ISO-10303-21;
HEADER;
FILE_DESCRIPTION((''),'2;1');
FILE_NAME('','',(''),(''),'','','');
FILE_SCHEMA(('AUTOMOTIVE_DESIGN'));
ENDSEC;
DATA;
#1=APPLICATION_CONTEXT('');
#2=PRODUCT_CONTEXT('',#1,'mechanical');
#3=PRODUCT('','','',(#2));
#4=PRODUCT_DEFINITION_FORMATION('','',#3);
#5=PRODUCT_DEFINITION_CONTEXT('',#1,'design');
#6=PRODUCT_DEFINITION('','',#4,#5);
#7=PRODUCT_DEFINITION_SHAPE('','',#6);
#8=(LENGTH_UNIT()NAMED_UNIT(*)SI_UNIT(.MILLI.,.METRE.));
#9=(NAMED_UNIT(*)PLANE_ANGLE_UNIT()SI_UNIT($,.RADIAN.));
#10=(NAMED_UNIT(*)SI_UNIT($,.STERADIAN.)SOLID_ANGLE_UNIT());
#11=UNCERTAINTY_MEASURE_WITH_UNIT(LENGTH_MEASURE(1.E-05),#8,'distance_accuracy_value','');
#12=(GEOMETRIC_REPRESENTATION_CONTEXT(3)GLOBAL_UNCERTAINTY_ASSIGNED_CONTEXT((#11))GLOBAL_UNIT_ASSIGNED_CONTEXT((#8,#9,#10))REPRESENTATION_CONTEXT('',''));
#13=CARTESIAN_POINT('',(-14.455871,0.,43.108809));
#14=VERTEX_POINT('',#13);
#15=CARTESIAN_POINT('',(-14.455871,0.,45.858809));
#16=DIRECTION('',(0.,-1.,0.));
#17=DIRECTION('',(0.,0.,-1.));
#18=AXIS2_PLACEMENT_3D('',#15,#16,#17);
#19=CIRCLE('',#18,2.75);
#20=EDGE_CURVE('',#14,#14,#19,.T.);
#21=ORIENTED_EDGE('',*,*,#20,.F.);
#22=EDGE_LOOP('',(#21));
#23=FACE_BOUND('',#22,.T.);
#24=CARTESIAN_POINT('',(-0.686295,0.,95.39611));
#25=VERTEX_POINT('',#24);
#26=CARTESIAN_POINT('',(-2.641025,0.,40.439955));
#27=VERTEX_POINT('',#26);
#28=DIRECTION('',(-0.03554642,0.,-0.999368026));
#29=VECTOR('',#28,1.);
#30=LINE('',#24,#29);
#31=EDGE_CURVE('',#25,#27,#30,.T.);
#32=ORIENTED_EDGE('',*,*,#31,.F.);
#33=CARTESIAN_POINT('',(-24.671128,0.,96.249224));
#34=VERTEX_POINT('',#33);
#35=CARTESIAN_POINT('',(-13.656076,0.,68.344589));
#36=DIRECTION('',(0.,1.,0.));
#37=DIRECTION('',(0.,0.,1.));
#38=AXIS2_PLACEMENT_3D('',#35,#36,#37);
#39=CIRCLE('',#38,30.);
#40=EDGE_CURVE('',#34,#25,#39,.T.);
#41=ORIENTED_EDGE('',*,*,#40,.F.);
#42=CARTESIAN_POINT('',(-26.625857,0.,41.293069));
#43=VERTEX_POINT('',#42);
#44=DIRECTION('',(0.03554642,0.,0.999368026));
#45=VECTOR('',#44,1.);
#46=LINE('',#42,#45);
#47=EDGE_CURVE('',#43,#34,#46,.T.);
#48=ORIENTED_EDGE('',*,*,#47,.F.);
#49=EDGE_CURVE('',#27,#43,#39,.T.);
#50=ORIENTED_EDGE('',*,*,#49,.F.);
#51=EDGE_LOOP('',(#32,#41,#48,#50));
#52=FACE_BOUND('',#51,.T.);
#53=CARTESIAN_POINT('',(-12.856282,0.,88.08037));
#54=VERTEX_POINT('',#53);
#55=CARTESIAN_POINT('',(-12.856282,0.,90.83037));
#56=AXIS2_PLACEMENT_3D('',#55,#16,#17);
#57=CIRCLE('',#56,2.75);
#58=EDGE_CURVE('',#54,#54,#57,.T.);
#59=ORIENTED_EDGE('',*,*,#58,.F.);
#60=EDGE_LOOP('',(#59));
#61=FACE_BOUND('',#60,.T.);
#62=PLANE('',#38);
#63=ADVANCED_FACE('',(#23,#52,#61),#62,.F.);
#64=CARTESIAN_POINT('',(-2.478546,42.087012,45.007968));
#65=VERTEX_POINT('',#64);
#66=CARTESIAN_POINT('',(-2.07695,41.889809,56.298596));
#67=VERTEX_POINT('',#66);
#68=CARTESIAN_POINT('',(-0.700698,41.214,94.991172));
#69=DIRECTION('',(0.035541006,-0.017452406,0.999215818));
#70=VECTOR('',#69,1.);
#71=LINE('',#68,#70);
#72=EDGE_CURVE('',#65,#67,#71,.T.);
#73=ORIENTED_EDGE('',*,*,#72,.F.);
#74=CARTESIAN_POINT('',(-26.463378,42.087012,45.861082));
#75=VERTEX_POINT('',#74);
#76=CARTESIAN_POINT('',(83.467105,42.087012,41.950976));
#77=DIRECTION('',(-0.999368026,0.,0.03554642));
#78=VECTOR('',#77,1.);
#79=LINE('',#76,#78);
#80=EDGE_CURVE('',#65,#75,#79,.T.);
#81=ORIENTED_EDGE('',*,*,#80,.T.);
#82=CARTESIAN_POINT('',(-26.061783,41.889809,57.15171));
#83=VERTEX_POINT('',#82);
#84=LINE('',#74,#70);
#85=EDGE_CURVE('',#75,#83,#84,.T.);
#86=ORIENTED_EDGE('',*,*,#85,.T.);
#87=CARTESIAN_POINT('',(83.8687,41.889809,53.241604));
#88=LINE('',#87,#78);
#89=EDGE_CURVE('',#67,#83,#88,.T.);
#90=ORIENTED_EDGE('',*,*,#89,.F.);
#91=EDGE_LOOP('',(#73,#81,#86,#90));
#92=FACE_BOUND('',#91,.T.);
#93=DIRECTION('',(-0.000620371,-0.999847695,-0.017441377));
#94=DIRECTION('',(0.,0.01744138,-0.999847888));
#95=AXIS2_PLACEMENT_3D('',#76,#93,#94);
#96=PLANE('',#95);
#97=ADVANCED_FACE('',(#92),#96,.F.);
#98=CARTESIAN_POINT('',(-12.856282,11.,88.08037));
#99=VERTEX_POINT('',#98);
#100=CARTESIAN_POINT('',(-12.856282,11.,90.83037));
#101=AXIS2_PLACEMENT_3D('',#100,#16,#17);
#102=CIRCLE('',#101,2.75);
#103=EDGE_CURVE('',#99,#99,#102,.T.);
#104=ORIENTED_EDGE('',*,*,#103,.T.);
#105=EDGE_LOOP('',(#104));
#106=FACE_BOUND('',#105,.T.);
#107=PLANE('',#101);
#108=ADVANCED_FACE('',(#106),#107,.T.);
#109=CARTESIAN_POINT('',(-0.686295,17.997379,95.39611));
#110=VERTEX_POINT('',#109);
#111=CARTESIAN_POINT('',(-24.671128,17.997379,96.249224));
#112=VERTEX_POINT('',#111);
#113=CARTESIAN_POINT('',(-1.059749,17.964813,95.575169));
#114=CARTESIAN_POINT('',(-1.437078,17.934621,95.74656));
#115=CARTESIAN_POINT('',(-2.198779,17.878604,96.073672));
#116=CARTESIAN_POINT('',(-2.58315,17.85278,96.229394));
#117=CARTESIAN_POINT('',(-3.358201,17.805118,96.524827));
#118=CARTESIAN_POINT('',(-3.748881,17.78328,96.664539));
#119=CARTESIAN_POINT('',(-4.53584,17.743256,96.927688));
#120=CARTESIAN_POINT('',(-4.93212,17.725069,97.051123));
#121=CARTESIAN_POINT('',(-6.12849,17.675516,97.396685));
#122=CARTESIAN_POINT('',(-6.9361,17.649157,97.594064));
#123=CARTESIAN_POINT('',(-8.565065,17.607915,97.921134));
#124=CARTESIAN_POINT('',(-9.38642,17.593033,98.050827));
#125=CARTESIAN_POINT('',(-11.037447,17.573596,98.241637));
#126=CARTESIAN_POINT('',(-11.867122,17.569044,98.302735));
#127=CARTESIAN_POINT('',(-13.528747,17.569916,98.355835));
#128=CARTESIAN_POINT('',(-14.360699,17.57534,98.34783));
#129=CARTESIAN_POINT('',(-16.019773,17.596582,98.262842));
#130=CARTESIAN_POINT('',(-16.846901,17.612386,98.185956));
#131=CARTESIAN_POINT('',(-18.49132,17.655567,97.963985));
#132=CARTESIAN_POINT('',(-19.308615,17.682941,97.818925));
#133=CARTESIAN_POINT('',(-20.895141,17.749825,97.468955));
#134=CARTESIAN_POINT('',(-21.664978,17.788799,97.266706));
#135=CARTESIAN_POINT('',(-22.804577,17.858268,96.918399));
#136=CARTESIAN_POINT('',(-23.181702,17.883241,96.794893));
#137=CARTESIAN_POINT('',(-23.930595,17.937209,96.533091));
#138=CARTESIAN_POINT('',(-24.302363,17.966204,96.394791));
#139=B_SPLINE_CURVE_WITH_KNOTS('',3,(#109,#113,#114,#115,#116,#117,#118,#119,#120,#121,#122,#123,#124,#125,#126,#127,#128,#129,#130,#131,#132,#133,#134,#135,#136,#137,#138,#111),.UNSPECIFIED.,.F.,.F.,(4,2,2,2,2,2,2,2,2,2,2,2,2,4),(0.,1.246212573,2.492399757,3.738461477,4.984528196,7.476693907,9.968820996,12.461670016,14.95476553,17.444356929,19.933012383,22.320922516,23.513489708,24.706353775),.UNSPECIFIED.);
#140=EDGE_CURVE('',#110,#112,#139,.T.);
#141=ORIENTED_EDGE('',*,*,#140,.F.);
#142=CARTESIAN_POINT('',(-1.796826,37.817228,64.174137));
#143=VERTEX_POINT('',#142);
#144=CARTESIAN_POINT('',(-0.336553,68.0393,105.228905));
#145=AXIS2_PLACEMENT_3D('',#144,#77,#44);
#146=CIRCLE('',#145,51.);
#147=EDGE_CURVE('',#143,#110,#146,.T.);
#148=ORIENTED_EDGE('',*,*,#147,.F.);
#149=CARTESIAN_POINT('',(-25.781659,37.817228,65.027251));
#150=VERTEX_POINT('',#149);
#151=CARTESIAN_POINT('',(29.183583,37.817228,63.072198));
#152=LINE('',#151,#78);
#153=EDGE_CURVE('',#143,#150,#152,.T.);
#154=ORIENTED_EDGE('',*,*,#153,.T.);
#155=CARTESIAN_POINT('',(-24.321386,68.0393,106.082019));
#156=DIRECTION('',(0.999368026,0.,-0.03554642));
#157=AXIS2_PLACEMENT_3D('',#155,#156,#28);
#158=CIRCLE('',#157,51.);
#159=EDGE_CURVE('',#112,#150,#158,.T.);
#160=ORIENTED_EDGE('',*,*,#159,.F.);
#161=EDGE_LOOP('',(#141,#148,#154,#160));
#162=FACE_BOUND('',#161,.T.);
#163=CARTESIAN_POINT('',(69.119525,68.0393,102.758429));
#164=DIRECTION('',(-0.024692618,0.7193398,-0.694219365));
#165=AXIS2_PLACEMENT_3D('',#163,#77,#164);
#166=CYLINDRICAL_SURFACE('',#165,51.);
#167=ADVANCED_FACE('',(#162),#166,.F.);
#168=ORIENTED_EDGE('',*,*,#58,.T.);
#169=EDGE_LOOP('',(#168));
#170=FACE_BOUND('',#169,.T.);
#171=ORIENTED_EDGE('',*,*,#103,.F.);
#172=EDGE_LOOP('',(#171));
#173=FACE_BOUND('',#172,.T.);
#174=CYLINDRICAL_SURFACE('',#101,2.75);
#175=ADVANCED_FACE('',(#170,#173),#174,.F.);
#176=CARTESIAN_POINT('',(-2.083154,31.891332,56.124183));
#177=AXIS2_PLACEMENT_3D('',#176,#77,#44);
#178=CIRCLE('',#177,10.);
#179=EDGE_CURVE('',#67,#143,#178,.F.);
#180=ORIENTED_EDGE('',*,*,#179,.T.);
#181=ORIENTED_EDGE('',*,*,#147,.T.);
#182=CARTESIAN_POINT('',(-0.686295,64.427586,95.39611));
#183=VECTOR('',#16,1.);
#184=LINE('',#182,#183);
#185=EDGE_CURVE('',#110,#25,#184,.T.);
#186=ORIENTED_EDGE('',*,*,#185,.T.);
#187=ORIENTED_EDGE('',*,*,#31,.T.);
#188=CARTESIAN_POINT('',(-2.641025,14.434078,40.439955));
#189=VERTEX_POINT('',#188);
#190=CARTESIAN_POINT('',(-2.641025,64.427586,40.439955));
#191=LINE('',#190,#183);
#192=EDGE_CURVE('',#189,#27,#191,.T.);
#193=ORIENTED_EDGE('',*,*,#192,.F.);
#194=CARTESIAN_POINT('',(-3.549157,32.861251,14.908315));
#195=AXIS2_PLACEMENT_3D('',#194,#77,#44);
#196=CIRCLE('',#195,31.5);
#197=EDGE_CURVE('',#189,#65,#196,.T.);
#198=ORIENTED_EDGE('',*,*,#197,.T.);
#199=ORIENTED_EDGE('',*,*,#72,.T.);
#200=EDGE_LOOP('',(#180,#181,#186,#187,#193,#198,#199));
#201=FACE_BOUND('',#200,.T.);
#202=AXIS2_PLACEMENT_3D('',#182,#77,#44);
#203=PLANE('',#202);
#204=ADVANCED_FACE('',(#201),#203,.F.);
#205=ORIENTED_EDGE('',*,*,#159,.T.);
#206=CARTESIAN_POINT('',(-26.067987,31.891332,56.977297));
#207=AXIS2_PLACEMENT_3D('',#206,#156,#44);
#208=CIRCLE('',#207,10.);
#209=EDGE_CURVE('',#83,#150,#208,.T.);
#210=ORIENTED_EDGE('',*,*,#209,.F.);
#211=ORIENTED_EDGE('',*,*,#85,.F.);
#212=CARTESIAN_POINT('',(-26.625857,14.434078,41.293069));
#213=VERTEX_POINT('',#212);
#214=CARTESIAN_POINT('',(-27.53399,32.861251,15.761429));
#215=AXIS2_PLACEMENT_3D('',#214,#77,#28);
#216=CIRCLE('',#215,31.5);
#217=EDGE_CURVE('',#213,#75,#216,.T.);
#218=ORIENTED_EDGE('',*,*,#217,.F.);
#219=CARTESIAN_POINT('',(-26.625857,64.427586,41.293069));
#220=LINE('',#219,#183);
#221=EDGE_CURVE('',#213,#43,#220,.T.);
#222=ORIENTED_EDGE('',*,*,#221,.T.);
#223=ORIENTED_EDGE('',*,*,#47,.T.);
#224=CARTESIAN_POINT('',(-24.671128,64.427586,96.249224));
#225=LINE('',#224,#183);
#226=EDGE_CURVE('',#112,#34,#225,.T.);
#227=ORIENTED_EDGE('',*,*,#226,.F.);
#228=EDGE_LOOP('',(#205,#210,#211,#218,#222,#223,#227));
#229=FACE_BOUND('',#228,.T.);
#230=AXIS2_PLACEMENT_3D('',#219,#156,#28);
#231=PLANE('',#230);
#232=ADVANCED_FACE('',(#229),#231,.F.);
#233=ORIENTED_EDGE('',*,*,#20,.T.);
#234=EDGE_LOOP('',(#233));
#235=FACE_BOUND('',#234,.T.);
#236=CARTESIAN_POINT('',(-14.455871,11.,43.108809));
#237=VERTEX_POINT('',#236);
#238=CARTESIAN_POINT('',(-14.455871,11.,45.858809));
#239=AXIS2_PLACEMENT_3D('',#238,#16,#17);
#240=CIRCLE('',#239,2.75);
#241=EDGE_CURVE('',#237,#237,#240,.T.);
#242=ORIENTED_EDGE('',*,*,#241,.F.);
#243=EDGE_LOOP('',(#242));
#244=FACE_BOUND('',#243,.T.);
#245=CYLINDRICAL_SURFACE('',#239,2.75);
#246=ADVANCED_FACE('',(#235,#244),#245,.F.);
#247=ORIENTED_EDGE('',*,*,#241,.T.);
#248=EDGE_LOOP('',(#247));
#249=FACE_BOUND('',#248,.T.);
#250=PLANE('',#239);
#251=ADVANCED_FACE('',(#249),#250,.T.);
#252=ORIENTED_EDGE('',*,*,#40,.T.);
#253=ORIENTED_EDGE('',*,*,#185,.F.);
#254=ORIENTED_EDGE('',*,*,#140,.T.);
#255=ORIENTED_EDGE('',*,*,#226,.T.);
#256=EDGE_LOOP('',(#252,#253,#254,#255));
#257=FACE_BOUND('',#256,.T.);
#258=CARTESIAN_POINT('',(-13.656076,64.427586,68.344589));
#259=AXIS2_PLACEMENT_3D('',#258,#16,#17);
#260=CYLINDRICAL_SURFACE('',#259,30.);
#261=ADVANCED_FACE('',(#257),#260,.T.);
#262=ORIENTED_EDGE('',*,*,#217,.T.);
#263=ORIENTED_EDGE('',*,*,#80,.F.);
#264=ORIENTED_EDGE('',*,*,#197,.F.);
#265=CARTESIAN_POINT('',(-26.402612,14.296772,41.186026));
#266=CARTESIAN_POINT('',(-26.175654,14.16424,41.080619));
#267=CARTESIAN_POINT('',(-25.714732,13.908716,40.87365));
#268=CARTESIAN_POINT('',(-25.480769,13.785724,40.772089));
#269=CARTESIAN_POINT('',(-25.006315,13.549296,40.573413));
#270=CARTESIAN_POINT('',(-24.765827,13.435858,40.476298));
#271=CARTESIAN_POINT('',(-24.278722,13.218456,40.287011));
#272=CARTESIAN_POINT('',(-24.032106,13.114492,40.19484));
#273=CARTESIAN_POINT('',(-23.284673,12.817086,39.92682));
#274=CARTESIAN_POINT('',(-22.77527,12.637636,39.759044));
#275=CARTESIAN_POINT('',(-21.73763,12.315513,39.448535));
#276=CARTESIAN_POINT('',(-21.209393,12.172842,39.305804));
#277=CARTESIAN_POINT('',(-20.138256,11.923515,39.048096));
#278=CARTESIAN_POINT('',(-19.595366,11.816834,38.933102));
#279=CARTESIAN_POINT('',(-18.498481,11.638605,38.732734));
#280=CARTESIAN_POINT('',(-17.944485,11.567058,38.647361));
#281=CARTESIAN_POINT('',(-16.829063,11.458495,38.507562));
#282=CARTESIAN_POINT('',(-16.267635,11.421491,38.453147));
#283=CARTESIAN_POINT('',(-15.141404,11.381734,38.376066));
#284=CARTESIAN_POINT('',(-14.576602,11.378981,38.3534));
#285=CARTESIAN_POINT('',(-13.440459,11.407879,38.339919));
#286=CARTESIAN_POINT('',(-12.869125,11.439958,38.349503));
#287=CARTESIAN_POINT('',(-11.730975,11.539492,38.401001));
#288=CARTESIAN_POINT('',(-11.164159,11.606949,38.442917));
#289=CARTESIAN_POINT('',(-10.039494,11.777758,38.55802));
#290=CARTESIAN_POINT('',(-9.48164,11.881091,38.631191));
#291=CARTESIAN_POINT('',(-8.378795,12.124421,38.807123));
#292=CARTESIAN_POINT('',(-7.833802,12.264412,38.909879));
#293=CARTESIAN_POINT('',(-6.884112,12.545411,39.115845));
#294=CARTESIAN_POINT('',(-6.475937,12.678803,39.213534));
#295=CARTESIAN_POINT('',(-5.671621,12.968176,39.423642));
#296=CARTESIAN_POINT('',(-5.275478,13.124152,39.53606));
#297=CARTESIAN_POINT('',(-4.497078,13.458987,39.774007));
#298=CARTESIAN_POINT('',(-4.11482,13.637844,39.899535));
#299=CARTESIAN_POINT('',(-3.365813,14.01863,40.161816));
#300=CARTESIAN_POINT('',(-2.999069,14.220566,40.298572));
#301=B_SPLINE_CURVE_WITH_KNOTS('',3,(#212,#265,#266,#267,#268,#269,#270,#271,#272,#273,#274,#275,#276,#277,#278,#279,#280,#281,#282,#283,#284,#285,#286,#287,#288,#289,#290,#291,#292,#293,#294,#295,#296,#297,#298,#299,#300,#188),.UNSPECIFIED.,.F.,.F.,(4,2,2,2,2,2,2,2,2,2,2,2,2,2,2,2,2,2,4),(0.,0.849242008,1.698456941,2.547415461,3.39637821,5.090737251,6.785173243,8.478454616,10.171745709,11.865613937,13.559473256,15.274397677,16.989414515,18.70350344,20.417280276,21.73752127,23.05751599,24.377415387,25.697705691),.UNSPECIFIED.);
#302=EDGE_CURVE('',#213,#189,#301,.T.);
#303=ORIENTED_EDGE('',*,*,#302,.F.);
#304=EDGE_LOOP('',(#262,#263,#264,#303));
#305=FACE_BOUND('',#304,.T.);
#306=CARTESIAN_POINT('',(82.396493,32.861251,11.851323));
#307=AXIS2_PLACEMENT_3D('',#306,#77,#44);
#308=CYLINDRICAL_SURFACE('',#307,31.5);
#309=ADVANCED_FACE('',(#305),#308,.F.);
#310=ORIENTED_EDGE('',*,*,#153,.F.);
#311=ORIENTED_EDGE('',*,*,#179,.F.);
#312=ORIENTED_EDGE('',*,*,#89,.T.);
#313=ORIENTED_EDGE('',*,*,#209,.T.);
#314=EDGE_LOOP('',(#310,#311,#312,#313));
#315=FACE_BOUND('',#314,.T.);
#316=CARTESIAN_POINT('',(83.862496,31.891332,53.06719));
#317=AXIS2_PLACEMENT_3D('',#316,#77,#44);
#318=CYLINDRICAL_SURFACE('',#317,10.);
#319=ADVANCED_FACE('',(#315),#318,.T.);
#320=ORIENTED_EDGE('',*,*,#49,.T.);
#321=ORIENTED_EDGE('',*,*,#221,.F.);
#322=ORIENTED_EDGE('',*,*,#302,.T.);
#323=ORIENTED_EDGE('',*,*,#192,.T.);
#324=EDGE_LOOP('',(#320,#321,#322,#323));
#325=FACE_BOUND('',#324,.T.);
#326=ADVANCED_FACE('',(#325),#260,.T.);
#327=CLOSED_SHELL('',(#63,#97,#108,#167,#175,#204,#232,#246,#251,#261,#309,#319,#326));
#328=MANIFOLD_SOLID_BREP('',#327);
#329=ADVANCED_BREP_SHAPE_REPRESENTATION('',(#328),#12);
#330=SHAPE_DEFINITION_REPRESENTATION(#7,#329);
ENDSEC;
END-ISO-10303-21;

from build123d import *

# Parameters (mm, degrees)
BOSS_EXTRUDE1_DEPTH   = 17.569451358
BOSS_EXTRUDE1_START   = 17.569451358
BOSS_EXTRUDE1_2_DEPTH = 46.858135107
BOSS_EXTRUDE1_START_2 = -28.07685133
BOSS_EXTRUDE1_3_DEPTH = 23.999999999
CUT_EXTRUDE4_DEPTH    = 110
CUT_EXTRUDE5_DEPTH    = 110
SKETCH7_R             = 2.75
CUT_EXTRUDE6_DEPTH    = 11


with BuildPart() as part:
    # Boss-Extrude1: read off the stored shape, not the designer's step
    # Boss-Extrude1 outline → Boss-Extrude1 (new body)
    with BuildSketch(Plane(origin=(0, 0, 0), x_dir=(1, 0, 0), z_dir=(0, 1, 0))):
        with BuildLine():
            ThreePointArc((-24.671127501, -96.249224292), (-12.589683548, -98.325630278), (-0.686294869, -95.396110217))
            Line((-0.686294869, -95.396110217), (-2.641024782, -40.439954684))
            ThreePointArc((-2.641024782, -40.439954684), (-14.722468735, -38.363548698), (-26.625857414, -41.293068759))
            Line((-26.625857414, -41.293068759), (-24.671127501, -96.249224292))
        make_face()
    extrude(amount=BOSS_EXTRUDE1_DEPTH)

    # Boss-Extrude1 2 outline → Boss-Extrude1 2 (add)
    with BuildSketch(Plane(origin=(0, 0, 0), x_dir=(1, 0, 0), z_dir=(0, 1, 0)).offset(BOSS_EXTRUDE1_START)):
        with BuildLine():
            ThreePointArc((-2.641024782, -40.439954684), (-14.722468735, -38.363548698), (-26.625857414, -41.293068759))
            Line((-26.625857414, -41.293068759), (-24.671127501, -96.249224292))
            ThreePointArc((-24.671127501, -96.249224292), (-12.589683548, -98.325630278), (-0.686294869, -95.396110217))
            Line((-0.686294869, -95.396110217), (-2.641024782, -40.439954684))
        make_face()
    extrude(amount=BOSS_EXTRUDE1_2_DEPTH)

    # Boss-Extrude1 3 outline → Boss-Extrude1 3 (cut)
    with BuildSketch(Plane(origin=(0, 0, 0), x_dir=(0, 1, 0), z_dir=(0.9993680263239928, 0, -0.03554641980970049)).offset(BOSS_EXTRUDE1_START_2)):
        with BuildLine():
            ThreePointArc((17.569338406, 97.816751997), (33.324720821, 67.788721809), (64.427586465, 54.27848788))
            Line((64.427586465, 54.27848788), (64.427586465, 99))
            Line((64.427586465, 99), (17.39740303, 99))
            Line((17.39740303, 99), (17.569338406, 97.816751997))
        make_face()
    extrude(amount=BOSS_EXTRUDE1_3_DEPTH, mode=Mode.SUBTRACT)

    # Sketch5 → Cut-Extrude4 (cut)
    with BuildSketch(Plane(origin=(-28.0591075, 0, 0.998031544), x_dir=(0.035546419809700254, 0, 0.9993680263239927), z_dir=(-0.9993680263239927, 0, 0.035546419809700254))):
        with BuildLine():
            Line((44.891420837, 42.087012188), (56.189188936, 41.889808912))
            ThreePointArc((56.189188936, 41.889808912), (60.605735593, 40.775141371), (64.069709996, 37.817228352))
            Line((64.069709996, 37.817228352), (71.315646663, 80.984453669))
            Line((71.315646663, 80.984453669), (32.067670376, 80.984453669))
            Line((32.067670376, 80.984453669), (32.067670376, 59.188710826))
            ThreePointArc((32.067670376, 59.188710826), (39.974518446, 51.75887054), (44.891420837, 42.087012188))
        make_face()
    extrude(amount=-CUT_EXTRUDE4_DEPTH, mode=Mode.SUBTRACT)

    # Sketch6 → Cut-Extrude5 (cut)
    with BuildSketch(Plane(origin=(-28.0591075, 0, 0.998031544), x_dir=(0.035546419809700254, 0, 0.9993680263239927), z_dir=(-0.9993680263239927, 0, 0.035546419809700254))):
        with BuildLine():
            Line((27.29032593, 61.767303304), (29.792054549, 5.172444286))
            ThreePointArc((29.792054549, 5.172444286), (46.242002949, 34.252323482), (27.29032593, 61.767303304))
        make_face()
    extrude(amount=-CUT_EXTRUDE5_DEPTH, mode=Mode.SUBTRACT)

    # Sketch7 → Cut-Extrude6 (cut)
    with BuildSketch(Plane.XZ):
        with Locations(Location((-14.455870587, 45.858808896, 0), (0, 0, 270))):
            Circle(SKETCH7_R)
        with Locations(Location((-12.856281696, 90.83037008, 0), (0, 0, 270))):
            Circle(SKETCH7_R)
    extrude(amount=-CUT_EXTRUDE6_DEPTH, mode=Mode.SUBTRACT)


solid = part.part
